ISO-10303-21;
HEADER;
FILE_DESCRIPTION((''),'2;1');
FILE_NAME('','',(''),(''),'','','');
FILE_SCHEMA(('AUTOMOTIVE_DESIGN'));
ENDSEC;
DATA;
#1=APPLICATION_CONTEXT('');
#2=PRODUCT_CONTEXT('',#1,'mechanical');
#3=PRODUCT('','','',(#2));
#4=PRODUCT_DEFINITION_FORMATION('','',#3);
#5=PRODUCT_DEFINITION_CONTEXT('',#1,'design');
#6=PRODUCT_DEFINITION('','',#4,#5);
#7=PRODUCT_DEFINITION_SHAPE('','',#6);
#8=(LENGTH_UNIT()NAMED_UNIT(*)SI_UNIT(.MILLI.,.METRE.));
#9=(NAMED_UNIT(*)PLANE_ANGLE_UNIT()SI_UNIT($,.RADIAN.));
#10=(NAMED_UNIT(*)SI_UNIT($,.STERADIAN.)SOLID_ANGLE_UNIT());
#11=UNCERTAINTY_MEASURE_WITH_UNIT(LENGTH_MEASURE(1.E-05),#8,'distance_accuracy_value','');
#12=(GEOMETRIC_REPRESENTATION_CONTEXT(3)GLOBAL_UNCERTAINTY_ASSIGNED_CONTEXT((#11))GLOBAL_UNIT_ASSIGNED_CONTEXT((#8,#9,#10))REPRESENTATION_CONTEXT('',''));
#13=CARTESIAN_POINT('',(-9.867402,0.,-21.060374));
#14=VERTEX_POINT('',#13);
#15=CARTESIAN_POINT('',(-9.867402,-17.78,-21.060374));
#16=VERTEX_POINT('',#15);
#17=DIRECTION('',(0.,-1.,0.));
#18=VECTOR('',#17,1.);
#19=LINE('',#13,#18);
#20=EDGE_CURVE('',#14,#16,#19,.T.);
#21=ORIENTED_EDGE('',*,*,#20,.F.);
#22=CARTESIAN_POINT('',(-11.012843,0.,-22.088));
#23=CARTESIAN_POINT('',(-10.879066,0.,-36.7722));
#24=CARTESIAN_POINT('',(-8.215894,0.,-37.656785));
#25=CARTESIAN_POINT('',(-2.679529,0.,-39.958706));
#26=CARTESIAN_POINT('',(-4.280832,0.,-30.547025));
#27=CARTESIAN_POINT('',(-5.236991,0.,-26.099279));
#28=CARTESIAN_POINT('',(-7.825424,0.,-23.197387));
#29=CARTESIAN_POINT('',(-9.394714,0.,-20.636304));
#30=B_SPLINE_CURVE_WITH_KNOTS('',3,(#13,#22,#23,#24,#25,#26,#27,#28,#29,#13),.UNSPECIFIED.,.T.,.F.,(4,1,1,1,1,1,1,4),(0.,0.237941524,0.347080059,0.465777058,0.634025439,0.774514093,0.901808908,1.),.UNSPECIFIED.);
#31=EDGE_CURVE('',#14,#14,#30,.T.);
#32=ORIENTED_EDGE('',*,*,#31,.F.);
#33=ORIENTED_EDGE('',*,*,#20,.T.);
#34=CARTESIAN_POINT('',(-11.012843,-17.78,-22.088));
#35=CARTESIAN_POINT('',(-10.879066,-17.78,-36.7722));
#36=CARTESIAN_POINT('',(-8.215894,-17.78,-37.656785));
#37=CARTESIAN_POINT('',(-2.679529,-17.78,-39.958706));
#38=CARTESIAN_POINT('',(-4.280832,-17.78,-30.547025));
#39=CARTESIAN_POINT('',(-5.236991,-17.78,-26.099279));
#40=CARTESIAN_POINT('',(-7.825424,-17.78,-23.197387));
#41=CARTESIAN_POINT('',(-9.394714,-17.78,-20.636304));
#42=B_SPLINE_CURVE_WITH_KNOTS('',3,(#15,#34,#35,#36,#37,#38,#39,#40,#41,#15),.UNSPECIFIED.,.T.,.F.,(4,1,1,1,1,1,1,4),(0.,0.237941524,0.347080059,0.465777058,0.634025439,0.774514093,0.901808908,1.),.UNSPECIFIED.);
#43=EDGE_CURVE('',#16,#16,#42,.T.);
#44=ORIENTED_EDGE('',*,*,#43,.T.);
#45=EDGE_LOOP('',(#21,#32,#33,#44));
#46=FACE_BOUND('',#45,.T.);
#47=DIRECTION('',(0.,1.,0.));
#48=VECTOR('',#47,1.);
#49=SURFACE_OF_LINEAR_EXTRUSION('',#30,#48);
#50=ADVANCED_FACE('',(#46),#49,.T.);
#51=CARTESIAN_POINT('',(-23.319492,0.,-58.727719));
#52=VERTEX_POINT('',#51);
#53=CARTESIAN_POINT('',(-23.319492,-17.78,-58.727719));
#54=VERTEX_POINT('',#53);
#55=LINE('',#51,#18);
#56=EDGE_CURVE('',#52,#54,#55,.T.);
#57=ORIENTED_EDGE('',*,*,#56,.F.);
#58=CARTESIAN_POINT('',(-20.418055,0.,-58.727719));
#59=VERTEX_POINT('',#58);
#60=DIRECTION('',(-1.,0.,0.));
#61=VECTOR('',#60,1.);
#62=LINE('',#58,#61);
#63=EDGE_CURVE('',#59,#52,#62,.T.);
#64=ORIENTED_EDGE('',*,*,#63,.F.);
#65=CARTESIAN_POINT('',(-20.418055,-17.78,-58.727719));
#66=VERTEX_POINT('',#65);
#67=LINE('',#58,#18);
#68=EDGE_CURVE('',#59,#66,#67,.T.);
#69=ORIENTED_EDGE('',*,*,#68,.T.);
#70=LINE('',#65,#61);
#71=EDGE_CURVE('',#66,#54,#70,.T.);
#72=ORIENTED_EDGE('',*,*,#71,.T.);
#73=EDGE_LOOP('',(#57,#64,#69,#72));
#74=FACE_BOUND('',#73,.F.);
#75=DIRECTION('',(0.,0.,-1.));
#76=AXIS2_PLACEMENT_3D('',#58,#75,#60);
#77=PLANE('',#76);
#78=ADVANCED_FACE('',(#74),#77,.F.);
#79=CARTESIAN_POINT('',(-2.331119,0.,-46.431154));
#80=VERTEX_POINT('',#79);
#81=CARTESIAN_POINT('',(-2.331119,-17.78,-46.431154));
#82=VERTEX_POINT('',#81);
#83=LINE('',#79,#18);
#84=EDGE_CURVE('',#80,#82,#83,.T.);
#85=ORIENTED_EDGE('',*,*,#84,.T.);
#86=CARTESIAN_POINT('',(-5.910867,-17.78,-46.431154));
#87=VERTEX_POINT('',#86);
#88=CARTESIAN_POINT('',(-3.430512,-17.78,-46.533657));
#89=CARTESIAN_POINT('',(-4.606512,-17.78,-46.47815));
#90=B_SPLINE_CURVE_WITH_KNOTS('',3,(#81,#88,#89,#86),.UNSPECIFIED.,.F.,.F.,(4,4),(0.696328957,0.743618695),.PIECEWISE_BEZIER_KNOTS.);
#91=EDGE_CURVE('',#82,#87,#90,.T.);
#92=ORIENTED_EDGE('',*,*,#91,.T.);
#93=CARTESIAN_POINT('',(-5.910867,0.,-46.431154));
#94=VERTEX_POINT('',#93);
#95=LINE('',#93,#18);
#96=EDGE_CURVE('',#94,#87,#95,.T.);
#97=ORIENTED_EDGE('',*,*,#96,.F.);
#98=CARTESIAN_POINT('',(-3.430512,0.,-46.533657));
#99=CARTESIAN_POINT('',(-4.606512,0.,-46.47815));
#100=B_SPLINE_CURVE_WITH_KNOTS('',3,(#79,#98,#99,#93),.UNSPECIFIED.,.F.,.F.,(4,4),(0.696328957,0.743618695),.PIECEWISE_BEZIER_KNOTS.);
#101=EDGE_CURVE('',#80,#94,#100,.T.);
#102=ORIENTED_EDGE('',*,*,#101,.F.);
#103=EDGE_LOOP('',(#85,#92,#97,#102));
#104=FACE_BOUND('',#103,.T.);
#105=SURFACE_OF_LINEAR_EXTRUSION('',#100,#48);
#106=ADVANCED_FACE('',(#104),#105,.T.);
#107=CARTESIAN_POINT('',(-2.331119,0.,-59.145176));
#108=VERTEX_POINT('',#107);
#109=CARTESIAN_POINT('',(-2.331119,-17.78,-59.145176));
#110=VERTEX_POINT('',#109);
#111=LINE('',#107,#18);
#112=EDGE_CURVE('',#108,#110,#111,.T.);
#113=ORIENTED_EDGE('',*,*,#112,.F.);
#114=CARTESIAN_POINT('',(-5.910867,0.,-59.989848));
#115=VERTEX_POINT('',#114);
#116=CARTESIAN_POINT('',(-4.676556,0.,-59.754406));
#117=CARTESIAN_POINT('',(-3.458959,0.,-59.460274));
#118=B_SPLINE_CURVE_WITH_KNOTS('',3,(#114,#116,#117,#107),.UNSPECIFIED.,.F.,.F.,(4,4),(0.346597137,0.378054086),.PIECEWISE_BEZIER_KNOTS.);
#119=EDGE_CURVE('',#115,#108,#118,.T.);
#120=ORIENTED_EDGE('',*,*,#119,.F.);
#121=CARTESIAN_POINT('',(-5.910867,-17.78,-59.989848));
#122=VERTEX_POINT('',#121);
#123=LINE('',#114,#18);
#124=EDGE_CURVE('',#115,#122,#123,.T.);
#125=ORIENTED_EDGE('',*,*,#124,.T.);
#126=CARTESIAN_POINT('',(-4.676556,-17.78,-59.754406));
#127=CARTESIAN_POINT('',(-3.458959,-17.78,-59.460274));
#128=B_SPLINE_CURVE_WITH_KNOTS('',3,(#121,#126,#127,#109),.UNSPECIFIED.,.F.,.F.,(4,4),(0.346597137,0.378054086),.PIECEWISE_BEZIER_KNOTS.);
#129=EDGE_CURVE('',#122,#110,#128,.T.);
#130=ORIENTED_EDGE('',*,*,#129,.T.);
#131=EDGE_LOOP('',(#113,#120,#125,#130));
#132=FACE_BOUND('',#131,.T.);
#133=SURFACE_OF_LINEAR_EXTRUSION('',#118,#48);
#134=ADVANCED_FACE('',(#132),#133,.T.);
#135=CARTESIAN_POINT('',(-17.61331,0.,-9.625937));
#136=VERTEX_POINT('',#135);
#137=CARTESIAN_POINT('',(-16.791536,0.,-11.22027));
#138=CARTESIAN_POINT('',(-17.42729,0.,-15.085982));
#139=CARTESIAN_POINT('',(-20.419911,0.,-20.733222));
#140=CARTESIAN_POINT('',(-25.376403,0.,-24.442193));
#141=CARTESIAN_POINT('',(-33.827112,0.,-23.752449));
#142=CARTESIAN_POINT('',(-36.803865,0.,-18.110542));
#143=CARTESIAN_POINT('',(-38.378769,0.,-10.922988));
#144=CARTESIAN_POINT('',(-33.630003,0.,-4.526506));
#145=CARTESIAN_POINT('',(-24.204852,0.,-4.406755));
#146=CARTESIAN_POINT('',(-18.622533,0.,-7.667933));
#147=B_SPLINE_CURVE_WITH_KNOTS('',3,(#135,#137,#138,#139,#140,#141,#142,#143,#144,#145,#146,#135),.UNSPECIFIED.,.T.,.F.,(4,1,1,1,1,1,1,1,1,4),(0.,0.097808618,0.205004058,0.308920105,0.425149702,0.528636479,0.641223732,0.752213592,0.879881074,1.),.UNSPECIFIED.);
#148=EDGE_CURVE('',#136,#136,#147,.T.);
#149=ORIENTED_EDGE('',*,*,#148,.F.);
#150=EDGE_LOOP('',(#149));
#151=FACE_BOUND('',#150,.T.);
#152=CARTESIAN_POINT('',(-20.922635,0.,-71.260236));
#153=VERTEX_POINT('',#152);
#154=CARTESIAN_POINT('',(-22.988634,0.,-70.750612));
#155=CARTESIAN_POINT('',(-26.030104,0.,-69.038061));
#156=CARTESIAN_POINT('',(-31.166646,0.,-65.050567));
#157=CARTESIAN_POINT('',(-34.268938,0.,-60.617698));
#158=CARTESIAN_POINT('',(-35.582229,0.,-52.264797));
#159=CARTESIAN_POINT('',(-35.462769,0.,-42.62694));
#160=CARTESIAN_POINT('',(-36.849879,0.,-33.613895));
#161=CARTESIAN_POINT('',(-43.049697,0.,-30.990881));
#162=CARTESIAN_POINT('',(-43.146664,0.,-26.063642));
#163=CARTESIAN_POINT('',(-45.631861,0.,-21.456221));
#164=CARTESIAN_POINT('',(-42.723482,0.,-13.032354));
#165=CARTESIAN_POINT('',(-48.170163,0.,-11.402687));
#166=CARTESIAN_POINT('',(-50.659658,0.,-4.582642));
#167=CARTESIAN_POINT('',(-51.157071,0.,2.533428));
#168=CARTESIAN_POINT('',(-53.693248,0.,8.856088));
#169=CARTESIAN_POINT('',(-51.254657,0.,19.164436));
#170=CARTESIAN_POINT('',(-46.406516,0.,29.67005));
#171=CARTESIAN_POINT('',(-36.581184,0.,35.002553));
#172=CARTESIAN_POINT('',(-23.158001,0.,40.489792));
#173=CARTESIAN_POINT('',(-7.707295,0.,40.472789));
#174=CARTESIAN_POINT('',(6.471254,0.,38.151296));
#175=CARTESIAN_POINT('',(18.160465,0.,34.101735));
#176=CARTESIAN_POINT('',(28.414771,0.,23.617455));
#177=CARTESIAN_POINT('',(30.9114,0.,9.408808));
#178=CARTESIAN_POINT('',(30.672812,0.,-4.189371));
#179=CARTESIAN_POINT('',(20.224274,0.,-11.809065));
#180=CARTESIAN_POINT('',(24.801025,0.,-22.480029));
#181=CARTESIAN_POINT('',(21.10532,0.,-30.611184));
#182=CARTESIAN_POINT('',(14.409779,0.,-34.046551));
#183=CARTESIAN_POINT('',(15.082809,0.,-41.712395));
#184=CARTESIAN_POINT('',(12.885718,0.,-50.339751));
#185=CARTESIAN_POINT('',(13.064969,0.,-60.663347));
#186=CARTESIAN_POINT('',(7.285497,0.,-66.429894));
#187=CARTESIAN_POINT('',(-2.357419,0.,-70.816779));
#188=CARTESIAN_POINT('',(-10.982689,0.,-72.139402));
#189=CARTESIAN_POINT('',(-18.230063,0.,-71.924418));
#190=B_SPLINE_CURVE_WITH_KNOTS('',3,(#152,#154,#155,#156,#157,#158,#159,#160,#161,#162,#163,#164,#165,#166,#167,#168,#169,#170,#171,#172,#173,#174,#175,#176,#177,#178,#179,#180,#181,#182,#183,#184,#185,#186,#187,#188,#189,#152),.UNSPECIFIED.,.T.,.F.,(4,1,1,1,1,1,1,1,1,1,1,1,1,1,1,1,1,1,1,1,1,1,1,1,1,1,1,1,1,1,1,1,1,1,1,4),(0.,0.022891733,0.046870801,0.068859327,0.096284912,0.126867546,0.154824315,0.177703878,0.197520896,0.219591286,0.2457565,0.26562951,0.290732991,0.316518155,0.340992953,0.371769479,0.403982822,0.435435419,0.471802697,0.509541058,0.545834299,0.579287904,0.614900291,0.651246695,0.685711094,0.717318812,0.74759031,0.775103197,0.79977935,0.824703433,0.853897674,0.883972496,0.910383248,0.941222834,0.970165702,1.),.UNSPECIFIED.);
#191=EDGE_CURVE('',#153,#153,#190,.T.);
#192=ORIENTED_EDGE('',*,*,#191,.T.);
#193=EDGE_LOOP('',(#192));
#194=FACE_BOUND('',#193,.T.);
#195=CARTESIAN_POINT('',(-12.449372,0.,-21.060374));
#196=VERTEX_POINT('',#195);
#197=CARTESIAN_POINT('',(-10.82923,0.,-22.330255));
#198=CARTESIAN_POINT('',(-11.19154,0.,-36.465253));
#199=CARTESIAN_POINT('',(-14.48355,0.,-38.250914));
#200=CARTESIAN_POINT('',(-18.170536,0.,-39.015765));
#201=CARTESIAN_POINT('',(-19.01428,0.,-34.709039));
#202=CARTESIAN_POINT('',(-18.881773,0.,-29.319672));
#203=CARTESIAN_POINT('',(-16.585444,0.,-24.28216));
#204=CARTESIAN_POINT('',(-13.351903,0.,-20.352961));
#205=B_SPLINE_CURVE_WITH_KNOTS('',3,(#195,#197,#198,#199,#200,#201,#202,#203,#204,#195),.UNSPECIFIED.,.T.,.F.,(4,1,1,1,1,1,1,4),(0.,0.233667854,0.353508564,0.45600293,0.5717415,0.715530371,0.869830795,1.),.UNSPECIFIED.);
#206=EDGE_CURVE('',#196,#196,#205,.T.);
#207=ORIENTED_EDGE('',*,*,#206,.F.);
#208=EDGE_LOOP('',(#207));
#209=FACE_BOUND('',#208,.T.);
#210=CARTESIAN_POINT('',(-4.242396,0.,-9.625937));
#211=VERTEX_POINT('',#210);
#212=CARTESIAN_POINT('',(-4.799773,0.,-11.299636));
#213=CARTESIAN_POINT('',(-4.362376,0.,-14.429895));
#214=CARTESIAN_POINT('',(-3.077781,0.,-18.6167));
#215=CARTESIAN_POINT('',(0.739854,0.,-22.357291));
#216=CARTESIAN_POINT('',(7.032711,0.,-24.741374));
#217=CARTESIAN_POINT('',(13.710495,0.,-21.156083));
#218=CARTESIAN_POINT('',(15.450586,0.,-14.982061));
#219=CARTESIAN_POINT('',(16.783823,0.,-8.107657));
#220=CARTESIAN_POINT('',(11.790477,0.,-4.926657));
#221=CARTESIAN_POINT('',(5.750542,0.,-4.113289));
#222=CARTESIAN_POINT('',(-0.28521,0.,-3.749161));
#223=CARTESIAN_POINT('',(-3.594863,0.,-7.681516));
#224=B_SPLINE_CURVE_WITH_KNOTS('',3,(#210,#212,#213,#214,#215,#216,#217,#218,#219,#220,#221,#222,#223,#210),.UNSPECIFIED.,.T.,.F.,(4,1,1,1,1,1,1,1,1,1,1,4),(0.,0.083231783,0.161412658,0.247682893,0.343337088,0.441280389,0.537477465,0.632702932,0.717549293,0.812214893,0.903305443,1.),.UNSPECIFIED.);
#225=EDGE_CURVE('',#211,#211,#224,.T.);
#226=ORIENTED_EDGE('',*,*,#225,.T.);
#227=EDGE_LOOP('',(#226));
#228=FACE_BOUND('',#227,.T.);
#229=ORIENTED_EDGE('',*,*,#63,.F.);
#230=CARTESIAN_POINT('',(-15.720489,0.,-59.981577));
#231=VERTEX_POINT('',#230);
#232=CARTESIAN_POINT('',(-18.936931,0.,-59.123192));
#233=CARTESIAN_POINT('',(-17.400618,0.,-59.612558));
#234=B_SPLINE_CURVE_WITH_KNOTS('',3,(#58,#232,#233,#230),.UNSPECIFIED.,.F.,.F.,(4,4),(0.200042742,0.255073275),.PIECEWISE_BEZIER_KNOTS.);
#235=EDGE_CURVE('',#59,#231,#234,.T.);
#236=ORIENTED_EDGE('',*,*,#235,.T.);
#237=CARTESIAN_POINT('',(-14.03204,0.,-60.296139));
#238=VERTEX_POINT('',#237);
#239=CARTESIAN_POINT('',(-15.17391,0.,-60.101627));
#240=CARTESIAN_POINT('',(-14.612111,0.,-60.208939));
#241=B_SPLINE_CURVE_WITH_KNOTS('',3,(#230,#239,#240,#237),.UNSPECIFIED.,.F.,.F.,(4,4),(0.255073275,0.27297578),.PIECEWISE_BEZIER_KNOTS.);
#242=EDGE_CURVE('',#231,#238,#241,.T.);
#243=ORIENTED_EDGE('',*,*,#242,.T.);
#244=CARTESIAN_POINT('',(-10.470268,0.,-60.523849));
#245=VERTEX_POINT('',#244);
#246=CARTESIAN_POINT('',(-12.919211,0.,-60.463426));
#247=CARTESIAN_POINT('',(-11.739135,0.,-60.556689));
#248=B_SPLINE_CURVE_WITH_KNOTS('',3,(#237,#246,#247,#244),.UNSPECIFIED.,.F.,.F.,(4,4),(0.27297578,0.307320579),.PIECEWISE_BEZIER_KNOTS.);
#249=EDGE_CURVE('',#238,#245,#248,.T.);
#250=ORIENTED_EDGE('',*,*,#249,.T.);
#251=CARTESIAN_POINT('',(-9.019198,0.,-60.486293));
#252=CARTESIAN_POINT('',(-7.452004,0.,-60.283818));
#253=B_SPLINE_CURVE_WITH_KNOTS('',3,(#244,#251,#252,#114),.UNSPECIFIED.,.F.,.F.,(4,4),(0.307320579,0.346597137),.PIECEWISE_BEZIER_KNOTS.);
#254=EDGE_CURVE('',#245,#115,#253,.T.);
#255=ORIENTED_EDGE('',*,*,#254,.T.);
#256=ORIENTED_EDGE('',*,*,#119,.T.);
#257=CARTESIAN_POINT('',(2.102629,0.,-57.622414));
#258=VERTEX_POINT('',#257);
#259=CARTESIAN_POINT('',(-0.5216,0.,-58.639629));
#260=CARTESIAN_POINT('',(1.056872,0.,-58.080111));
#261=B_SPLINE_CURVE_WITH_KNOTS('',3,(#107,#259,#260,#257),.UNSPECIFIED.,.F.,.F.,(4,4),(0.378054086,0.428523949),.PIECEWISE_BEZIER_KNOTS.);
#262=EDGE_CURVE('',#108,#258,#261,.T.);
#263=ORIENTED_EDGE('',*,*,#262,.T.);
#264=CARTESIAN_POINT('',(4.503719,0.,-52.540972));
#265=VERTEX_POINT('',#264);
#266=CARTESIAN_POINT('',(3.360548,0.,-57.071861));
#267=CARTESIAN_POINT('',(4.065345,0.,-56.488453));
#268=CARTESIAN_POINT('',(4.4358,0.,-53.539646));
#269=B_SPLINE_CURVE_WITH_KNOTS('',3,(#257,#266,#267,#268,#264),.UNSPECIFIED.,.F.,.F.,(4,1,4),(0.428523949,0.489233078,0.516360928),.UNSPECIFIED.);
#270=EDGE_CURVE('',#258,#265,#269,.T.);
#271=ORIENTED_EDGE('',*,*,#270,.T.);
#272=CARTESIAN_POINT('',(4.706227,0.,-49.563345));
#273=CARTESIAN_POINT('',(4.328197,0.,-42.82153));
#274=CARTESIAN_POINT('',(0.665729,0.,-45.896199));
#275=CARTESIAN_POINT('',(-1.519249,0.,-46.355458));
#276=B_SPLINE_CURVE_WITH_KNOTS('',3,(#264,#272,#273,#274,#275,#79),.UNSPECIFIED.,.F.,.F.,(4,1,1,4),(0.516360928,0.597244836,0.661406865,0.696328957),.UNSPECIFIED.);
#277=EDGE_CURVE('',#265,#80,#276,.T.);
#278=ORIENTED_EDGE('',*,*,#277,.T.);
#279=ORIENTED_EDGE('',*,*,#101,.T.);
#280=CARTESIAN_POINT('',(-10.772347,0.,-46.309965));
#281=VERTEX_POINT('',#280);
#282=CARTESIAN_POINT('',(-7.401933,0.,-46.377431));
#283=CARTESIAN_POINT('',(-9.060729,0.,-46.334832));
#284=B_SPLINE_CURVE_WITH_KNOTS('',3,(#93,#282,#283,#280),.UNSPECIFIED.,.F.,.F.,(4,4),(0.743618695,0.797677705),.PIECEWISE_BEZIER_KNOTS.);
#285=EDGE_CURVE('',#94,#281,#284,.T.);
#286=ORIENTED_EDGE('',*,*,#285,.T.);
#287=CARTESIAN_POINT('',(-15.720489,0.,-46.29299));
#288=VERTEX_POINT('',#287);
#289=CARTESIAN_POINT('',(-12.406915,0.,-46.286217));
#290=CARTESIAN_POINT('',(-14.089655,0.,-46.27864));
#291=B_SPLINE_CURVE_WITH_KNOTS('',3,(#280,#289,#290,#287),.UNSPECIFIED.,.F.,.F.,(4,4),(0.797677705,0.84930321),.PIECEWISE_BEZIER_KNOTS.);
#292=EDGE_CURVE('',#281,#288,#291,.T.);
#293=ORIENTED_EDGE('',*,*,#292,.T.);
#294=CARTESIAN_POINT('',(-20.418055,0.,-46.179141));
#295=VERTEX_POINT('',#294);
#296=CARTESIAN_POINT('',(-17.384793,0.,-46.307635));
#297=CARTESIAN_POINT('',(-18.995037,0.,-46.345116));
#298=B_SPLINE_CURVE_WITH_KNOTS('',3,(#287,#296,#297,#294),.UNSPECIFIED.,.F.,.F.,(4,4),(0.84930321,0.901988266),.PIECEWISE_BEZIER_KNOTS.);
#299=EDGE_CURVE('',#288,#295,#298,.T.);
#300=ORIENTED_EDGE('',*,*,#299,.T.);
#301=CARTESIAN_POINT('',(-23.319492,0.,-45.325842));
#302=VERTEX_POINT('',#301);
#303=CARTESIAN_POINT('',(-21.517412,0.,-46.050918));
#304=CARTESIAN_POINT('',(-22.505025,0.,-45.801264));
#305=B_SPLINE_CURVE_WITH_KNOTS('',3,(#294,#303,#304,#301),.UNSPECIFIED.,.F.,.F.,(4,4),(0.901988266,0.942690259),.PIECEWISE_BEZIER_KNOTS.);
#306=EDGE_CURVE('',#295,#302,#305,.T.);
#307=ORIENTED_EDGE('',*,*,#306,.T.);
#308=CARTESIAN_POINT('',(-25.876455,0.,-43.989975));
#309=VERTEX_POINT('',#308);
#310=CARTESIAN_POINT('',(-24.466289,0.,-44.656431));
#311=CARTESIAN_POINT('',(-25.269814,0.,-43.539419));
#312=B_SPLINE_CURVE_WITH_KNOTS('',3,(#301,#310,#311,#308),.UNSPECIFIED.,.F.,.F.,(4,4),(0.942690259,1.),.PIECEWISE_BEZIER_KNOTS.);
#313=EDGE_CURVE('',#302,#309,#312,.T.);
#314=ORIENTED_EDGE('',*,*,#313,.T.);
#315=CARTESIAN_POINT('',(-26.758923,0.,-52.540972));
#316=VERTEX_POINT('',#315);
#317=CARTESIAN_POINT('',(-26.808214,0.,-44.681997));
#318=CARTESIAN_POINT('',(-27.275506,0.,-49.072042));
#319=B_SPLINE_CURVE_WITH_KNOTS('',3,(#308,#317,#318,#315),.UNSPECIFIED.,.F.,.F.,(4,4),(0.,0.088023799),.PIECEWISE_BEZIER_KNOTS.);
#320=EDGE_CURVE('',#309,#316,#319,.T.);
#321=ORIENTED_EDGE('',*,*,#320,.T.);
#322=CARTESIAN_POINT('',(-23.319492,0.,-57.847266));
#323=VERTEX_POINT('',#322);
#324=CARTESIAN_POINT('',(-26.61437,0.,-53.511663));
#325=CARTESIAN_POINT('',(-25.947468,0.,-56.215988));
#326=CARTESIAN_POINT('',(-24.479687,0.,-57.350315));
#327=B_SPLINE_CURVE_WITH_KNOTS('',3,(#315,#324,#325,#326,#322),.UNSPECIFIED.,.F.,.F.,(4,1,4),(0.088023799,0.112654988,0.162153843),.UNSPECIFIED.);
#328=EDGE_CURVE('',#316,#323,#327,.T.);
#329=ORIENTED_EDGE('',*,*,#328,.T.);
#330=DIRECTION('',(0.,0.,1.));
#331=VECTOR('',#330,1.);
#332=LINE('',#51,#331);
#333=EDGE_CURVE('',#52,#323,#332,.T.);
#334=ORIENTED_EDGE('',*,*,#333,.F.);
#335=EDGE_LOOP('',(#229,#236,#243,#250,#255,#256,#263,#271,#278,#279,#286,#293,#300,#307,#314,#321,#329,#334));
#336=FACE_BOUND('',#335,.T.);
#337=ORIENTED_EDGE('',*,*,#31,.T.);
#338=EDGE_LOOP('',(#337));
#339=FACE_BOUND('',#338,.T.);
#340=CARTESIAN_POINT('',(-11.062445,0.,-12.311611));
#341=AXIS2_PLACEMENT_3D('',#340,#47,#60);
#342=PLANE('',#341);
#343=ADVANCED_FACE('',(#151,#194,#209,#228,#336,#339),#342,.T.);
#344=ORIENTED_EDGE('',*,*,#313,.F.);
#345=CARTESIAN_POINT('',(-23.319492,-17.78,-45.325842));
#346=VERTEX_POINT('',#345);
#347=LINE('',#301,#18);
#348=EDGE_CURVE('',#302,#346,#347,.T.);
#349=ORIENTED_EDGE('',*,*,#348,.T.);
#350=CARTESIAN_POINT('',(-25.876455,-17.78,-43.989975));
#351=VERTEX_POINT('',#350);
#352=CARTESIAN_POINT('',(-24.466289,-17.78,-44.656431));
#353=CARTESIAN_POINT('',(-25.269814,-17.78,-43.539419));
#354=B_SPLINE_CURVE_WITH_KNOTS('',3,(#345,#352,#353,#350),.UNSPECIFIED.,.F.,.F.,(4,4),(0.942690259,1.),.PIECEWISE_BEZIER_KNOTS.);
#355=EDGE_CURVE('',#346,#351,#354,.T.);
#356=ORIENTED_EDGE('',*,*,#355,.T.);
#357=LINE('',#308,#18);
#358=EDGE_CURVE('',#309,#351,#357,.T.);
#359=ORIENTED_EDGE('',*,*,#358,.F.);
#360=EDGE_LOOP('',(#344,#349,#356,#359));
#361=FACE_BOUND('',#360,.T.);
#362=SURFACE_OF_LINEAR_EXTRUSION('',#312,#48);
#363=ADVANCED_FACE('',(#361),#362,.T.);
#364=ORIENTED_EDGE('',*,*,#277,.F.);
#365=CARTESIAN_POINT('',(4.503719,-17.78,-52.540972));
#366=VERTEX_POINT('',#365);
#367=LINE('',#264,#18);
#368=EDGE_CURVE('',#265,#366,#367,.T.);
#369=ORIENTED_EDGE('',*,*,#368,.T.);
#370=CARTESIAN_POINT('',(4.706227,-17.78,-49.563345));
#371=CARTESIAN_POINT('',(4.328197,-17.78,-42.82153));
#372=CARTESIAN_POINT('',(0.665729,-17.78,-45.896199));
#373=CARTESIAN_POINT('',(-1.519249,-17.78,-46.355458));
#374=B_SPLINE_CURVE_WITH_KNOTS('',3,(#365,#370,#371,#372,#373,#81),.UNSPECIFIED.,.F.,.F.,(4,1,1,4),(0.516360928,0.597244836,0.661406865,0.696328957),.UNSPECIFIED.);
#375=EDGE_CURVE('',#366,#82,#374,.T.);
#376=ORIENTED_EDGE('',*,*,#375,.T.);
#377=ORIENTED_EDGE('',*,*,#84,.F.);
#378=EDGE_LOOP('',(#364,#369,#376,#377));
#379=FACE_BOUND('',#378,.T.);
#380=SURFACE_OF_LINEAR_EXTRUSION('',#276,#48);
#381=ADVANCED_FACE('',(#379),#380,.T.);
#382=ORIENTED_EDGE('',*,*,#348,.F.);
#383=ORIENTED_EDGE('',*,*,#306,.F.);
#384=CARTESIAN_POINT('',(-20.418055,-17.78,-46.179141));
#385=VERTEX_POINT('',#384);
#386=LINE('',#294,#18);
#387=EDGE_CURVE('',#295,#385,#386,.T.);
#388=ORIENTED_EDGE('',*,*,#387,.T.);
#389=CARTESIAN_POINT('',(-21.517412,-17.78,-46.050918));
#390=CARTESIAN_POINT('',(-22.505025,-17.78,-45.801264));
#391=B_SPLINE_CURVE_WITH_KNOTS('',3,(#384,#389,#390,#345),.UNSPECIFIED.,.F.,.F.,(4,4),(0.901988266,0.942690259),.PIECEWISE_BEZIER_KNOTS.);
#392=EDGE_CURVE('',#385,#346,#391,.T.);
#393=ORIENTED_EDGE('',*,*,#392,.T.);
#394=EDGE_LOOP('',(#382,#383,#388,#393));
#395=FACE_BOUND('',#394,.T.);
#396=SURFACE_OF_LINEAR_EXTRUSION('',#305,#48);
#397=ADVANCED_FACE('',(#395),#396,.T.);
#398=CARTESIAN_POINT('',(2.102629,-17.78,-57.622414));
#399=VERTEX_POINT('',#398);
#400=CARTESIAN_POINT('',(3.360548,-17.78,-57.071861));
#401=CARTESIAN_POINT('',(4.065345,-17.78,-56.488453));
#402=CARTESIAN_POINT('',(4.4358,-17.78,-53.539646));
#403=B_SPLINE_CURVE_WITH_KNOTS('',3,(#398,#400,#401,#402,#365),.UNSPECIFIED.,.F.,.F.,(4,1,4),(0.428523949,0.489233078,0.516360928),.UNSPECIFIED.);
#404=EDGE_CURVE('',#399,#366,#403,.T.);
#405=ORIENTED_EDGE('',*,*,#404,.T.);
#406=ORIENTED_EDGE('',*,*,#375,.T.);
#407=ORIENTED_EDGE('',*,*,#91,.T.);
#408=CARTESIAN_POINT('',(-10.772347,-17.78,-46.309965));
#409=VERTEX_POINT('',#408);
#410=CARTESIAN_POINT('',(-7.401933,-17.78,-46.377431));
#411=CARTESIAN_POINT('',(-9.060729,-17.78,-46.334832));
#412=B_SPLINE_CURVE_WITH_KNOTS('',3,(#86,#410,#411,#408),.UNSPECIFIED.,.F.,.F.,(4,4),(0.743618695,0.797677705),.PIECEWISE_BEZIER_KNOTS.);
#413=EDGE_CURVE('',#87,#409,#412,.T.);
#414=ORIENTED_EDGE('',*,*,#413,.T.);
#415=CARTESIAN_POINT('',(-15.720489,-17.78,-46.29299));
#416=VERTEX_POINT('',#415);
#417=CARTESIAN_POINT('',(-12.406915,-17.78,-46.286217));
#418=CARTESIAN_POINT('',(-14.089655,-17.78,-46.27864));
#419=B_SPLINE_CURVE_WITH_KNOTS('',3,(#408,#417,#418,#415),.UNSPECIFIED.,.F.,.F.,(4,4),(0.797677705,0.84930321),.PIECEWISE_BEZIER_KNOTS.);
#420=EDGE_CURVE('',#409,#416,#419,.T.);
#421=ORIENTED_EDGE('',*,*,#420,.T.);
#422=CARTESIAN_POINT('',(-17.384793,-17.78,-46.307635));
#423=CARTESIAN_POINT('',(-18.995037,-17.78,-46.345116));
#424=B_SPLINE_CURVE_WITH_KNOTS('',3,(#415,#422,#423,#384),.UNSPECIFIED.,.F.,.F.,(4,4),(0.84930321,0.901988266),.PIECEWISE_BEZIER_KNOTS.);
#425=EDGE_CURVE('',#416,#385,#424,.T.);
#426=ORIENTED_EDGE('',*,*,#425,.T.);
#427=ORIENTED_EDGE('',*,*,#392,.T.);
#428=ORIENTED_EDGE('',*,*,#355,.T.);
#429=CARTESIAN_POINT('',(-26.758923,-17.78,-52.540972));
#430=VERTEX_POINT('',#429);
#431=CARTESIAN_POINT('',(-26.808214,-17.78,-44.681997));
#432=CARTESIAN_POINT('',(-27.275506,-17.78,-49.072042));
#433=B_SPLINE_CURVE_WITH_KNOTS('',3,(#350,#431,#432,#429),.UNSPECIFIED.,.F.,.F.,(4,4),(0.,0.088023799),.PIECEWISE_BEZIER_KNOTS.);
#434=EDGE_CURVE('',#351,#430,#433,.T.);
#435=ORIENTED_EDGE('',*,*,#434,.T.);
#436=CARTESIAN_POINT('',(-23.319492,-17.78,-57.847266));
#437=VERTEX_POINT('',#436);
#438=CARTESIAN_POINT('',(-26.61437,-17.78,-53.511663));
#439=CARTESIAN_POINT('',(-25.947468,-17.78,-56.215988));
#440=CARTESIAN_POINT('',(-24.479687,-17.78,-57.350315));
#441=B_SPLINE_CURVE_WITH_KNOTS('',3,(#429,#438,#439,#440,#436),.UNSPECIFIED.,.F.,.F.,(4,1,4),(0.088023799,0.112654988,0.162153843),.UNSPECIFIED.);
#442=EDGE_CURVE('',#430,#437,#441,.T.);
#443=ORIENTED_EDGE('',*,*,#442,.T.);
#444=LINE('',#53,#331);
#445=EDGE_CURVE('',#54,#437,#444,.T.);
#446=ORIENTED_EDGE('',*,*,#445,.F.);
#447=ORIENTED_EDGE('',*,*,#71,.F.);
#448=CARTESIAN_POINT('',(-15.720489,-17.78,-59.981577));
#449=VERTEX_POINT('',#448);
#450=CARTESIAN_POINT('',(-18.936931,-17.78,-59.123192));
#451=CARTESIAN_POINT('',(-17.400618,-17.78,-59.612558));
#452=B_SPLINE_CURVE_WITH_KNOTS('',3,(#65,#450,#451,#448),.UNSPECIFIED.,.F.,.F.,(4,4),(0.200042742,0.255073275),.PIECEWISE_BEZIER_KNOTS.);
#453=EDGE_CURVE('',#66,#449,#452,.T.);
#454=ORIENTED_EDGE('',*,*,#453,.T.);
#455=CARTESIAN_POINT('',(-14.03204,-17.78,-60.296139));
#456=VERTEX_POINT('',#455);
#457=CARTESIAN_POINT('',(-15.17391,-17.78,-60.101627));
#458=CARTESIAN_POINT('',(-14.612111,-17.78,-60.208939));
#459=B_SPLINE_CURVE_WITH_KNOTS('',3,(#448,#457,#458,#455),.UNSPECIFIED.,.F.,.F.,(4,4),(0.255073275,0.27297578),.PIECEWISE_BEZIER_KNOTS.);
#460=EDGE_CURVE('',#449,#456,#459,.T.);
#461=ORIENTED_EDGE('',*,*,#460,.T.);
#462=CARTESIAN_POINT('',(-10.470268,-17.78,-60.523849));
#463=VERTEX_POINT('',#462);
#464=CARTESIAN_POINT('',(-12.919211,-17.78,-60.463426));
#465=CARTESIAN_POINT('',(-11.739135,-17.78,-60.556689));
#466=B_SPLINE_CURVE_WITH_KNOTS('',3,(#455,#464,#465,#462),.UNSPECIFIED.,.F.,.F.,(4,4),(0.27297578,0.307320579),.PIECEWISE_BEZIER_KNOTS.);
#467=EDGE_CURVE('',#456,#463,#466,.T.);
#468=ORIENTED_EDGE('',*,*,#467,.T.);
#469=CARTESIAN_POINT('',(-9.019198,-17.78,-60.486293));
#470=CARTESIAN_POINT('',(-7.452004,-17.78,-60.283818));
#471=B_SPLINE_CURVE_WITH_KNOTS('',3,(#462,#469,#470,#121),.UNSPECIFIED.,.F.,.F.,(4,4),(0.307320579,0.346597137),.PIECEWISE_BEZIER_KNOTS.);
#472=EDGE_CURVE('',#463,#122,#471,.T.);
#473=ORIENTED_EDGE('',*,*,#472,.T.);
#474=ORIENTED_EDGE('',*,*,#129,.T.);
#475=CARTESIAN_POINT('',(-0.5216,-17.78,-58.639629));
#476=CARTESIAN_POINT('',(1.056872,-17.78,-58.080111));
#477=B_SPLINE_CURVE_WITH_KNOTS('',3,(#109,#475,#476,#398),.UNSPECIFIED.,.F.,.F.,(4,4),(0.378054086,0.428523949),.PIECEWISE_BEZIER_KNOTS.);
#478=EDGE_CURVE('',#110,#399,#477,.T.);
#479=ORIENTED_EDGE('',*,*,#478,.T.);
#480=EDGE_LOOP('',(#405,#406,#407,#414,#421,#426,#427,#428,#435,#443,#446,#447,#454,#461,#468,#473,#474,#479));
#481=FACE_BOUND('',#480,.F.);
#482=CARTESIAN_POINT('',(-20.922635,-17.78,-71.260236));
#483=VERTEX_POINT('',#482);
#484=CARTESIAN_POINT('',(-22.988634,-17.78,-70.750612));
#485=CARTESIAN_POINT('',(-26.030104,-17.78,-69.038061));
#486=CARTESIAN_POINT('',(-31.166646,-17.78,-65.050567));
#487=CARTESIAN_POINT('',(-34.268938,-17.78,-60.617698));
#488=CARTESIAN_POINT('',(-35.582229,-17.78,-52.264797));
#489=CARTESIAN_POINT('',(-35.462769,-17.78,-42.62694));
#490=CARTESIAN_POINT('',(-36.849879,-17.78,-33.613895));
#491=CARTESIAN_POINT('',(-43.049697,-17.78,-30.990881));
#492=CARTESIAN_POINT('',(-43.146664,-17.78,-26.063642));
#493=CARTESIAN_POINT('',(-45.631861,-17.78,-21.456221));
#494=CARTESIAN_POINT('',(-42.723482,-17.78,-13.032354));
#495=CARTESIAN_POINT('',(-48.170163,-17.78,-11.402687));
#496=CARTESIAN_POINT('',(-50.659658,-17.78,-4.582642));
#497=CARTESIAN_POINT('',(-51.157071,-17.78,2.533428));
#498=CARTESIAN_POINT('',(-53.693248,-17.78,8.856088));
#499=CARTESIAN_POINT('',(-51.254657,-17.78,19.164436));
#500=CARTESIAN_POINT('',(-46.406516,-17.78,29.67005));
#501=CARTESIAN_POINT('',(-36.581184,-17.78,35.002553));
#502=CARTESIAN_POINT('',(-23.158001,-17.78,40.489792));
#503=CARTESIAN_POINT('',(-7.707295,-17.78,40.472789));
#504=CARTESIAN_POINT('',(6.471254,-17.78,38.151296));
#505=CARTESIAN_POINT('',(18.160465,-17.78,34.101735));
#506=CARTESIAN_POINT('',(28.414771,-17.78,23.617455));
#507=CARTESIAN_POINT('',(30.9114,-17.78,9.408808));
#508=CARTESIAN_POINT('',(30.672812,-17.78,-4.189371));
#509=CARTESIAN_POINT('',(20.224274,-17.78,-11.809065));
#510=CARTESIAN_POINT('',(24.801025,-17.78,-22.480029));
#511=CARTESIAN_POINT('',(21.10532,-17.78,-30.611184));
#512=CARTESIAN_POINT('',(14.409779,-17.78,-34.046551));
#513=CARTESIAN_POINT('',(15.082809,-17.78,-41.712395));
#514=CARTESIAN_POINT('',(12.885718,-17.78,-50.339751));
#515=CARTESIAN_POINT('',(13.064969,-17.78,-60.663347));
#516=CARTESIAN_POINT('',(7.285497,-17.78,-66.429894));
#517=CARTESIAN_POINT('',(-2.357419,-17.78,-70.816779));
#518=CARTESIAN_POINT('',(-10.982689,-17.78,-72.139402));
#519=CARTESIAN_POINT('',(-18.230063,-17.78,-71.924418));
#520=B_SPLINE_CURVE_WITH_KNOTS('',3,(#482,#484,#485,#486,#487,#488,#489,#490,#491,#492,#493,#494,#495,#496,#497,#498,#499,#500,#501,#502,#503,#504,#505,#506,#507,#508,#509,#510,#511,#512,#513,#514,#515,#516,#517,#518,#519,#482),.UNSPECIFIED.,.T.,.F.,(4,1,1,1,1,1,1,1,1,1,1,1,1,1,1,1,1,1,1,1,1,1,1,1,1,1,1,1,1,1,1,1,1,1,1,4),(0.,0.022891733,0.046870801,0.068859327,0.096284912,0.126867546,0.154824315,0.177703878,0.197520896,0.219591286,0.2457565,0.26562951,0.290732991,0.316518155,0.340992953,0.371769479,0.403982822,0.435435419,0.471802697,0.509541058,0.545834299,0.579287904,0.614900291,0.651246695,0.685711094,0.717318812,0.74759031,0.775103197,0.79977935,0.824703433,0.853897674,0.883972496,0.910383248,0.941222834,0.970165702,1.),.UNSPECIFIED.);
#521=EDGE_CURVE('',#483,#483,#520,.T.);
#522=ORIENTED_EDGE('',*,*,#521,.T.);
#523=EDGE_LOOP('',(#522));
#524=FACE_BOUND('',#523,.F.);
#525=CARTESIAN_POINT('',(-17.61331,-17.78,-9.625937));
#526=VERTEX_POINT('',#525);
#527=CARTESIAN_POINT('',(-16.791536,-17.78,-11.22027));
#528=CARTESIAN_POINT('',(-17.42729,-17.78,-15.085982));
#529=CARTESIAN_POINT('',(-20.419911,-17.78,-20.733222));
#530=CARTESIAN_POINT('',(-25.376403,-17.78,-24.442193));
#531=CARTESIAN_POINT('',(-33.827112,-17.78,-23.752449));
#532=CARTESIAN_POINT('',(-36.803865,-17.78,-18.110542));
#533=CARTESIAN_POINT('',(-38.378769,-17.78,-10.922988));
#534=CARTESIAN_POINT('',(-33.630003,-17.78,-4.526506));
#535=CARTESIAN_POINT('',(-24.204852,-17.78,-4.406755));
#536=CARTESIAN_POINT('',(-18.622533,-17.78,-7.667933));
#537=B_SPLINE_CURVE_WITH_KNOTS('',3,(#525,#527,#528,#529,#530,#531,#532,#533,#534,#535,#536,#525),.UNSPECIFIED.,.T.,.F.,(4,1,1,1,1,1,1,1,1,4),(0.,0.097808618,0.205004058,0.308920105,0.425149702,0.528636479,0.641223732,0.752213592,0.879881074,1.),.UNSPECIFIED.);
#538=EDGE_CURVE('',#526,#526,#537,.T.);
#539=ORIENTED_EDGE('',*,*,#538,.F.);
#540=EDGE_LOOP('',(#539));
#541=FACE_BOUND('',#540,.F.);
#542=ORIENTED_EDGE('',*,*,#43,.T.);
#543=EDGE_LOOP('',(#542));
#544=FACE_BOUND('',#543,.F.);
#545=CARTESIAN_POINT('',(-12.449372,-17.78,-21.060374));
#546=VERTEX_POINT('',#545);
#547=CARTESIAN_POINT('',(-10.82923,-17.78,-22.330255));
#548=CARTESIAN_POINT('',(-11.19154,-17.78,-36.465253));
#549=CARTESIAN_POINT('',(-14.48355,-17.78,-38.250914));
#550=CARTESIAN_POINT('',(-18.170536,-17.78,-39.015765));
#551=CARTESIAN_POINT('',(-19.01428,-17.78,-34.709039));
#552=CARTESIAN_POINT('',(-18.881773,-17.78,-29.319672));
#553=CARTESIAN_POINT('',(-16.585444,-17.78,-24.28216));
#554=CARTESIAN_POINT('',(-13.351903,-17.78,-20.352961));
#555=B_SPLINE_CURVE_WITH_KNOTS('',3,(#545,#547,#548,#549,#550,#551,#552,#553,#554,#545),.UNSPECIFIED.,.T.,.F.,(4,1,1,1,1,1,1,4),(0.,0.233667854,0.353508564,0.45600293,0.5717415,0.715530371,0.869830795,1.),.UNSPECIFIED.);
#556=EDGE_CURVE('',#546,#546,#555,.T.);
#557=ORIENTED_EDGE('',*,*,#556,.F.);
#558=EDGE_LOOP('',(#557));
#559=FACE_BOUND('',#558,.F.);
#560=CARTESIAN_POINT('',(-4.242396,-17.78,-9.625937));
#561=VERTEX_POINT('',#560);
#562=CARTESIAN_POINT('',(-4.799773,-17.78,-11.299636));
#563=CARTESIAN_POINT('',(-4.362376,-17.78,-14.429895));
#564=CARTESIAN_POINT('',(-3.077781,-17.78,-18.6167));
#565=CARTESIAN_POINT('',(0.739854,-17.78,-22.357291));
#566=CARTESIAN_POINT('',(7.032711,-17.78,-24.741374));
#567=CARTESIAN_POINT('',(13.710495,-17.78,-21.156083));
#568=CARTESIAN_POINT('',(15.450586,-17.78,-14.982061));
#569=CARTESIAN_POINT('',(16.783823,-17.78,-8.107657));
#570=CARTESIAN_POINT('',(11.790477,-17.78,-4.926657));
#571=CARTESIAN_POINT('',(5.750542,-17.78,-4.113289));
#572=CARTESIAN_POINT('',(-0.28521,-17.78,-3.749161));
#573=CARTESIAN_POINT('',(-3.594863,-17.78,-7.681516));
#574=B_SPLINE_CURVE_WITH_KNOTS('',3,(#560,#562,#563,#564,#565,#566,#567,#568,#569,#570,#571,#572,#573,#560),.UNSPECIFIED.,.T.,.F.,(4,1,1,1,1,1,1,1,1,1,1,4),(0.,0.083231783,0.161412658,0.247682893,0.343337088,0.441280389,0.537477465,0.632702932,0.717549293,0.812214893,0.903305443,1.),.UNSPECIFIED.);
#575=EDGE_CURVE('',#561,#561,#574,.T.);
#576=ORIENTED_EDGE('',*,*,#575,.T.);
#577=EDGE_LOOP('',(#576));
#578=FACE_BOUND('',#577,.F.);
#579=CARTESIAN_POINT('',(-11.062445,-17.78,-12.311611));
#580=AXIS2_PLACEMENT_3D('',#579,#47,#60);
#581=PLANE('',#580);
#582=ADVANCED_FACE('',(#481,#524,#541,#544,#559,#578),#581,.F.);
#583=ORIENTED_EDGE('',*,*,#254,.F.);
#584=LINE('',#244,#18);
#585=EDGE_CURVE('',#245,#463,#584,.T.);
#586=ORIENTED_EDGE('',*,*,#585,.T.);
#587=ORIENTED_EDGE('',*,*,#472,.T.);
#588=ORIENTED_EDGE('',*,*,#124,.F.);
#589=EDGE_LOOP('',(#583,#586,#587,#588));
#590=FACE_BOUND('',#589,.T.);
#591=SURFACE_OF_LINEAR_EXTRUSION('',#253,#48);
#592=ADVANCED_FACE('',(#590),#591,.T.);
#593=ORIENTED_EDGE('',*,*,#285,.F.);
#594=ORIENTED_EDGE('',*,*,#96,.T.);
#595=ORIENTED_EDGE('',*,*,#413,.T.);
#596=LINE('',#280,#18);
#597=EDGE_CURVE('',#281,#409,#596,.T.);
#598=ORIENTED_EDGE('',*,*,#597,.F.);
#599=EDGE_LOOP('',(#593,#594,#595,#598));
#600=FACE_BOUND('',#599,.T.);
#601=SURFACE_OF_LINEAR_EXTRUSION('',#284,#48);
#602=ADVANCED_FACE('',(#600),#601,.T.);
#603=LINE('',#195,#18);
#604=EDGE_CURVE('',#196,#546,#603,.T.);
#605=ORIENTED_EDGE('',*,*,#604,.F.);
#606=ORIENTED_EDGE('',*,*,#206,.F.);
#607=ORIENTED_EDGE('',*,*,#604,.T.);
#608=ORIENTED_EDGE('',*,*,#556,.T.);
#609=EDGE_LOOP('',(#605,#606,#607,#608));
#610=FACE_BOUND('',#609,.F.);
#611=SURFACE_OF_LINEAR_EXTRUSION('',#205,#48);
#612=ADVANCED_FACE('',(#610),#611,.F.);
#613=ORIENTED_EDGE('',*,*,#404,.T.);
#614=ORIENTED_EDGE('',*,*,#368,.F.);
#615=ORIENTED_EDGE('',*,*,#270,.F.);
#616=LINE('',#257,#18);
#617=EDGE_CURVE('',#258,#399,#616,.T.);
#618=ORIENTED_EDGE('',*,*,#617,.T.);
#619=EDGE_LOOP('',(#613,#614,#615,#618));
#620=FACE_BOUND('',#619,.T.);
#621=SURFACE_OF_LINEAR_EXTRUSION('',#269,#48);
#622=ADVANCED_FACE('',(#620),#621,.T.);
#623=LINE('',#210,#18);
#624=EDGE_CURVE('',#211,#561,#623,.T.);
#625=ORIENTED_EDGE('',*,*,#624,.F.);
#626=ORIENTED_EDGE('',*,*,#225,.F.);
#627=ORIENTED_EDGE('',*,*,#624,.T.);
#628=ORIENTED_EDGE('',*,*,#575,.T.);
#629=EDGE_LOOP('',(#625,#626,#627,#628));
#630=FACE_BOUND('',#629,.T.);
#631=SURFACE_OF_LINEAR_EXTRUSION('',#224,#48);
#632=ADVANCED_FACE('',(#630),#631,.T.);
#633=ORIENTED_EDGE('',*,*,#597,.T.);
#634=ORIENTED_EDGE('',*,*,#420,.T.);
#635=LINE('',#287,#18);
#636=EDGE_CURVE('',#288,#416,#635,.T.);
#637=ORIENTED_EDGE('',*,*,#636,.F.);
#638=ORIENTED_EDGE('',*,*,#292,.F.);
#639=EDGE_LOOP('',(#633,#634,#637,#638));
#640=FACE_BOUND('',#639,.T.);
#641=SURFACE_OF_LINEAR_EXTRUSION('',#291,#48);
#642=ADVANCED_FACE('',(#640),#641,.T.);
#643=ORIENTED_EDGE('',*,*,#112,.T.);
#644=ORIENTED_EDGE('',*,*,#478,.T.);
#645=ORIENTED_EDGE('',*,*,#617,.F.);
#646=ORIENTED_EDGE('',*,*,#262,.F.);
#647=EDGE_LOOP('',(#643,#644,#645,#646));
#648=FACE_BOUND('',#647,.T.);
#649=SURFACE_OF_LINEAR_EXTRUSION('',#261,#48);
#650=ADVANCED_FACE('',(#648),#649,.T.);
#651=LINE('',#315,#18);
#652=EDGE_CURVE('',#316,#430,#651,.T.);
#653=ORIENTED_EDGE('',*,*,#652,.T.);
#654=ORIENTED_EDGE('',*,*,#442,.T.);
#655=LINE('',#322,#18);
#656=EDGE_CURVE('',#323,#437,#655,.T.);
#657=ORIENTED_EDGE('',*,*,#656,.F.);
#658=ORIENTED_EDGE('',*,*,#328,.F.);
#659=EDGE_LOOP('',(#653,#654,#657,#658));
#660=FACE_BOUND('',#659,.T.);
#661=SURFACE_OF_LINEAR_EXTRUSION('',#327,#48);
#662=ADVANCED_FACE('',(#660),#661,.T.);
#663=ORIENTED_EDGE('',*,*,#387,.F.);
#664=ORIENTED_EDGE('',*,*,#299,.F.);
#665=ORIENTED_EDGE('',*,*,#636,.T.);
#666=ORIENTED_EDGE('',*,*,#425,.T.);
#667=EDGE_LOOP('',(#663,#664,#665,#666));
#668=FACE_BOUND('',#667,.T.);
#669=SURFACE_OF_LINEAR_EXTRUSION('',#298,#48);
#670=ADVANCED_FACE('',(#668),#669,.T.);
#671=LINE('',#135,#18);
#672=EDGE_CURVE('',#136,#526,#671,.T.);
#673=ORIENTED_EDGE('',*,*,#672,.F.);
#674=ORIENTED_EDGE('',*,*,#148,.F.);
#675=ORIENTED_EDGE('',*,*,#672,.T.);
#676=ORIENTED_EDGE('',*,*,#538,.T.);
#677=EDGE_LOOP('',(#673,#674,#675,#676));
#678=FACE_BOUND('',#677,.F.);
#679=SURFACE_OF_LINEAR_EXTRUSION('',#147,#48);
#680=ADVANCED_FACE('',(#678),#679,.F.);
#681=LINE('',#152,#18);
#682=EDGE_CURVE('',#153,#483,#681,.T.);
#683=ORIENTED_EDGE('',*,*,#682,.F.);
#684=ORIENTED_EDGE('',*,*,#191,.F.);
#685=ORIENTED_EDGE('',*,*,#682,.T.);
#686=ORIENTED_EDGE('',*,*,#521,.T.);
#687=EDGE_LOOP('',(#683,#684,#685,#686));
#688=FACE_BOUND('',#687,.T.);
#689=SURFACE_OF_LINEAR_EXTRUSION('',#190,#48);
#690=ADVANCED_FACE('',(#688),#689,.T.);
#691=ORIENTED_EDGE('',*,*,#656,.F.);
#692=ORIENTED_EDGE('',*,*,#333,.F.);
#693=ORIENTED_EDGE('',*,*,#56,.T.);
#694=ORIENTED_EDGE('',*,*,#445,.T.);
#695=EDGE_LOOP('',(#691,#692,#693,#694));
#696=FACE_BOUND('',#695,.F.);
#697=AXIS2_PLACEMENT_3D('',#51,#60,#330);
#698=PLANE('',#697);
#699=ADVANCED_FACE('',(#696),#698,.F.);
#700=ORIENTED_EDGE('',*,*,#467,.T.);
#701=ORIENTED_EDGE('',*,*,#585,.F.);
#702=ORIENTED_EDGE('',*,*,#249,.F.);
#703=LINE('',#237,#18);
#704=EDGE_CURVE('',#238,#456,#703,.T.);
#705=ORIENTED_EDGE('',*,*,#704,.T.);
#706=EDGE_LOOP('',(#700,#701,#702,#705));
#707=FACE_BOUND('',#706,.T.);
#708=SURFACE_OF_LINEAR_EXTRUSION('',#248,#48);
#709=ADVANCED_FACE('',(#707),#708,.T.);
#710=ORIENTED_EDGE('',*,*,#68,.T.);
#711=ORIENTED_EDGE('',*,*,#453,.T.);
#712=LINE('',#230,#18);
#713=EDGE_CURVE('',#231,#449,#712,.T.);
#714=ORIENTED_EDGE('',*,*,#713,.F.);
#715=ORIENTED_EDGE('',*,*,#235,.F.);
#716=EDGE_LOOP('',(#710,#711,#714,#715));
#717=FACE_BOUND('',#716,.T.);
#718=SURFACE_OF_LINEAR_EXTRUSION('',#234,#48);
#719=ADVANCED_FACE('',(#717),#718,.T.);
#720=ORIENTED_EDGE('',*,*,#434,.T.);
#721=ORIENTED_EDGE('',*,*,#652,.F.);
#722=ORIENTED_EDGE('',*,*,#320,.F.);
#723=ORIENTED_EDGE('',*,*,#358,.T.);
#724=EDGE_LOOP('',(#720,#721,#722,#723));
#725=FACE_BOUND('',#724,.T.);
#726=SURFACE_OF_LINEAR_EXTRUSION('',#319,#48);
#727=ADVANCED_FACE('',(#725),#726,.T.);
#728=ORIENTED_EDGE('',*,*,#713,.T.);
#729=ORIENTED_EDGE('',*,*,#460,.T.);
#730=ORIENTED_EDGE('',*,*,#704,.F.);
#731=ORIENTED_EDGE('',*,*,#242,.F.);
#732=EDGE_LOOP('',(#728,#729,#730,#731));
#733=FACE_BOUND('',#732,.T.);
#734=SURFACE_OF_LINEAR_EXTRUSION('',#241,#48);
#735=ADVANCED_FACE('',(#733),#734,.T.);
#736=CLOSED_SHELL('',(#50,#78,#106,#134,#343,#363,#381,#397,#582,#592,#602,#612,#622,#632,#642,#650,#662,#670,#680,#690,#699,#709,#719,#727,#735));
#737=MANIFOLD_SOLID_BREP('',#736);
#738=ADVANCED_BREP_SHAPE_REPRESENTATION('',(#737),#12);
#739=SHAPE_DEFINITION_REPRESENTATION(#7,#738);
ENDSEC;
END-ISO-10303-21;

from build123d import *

# Parameters (mm, degrees)
F1_DEPTH = 17.78


# Not quite as in the source:
# - the program builds the solid bodies; features that only make, move or delete a surface that nothing else refers to are left out


with BuildPart() as f1:
    # F0 (on Front) → F1 (new body)
    with BuildSketch(Plane.XZ):
        with BuildLine():
            add(Edge.make_bspline(
                [(-20.9226347506, -71.2602362037), (-22.9886342213, -70.7506123091), (-26.0301044902, -69.0380612745), (-31.1666456634, -65.0505667557), (-34.2689378028, -60.6176976927), (-35.5822291113, -52.2647973285), (-35.4627694042, -42.6269395546), (-36.8498794394, -33.613895217), (-43.0496971354, -30.9908814125), (-43.1466641232, -26.0636418667), (-45.6318612712, -21.4562205965), (-42.723481771, -13.0323540897), (-48.1701631476, -11.4026865835), (-50.6596581538, -4.5826420913), (-51.1570706347, 2.5334279955), (-53.6932475631, 8.8560882656), (-51.2546569538, 19.164436079), (-46.4065160275, 29.6700504939), (-36.5811839124, 35.0025530943), (-23.1580005213, 40.489791694), (-7.7072946703, 40.4727885367), (6.4712539836, 38.1512957348), (18.1604650619, 34.1017346949), (28.4147710656, 23.6174553255), (30.911400155, 9.4088083889), (30.6728119611, -4.1893708351), (20.2242742309, -11.8090645901), (24.8010252062, -22.4800291026), (21.1053201708, -30.6111839492), (14.4097792293, -34.0465505235), (15.0828088795, -41.7123951546), (12.8857178127, -50.3397512226), (13.0649687999, -60.6633470175), (7.2854967108, -66.4298943527), (-2.3574186317, -70.8167790943), (-10.982688846, -72.1394021849), (-18.2300625399, -71.92441795), (-20.9226347506, -71.2602362037)],
                knots=[0, 0, 0, 0, 0.0228917331, 0.0468708008, 0.0688593266, 0.0962849122, 0.1268675457, 0.1548243145, 0.1777038778, 0.1975208964, 0.2195912859, 0.2457564995, 0.2656295096, 0.290732991, 0.3165181546, 0.3409929532, 0.3717694787, 0.403982822, 0.4354354186, 0.4718026973, 0.5095410579, 0.5458342986, 0.5792879041, 0.614900291, 0.6512466949, 0.685711094, 0.7173188118, 0.7475903097, 0.7751031966, 0.7997793498, 0.8247034334, 0.8538976743, 0.883972496, 0.9103832483, 0.9412228343, 0.9701657017, 1, 1, 1, 1], degree=3))
        make_face()
        with BuildLine():
            add(Edge.make_bspline(
                [(-12.4493716285, -21.0603736341), (-10.829230374, -22.3302554562), (-11.1915395304, -36.4652533596), (-14.4835500635, -38.2509141163), (-18.1705359121, -39.0157648002), (-19.0142803498, -34.7090389314), (-18.8817734758, -29.3196721187), (-16.5854441236, -24.2821601952), (-13.3519027008, -20.3529613641), (-12.4493716285, -21.0603736341)],
                knots=[0, 0, 0, 0, 0.2336678543, 0.3535085639, 0.4560029301, 0.5717415004, 0.7155303715, 0.869830795, 1, 1, 1, 1], degree=3))
        make_face(mode=Mode.SUBTRACT)
        with BuildLine():
            add(Edge.make_bspline(
                [(-25.876455009, -43.9899750054), (-26.8082138316, -44.681997323), (-27.2755063744, -49.0720417723), (-26.7589227771, -52.5409724782)],
                knots=[0, 0, 0, 0, 0.0880237985, 0.0880237985, 0.0880237985, 0.0880237985], degree=3))
            add(Edge.make_bspline(
                [(-23.3194921166, -45.3258417547), (-24.4662885556, -44.6564309517), (-25.2698138816, -43.5394193587), (-25.876455009, -43.9899750054)],
                knots=[0.9426902595, 0.9426902595, 0.9426902595, 0.9426902595, 1, 1, 1, 1], degree=3))
            add(Edge.make_bspline(
                [(-20.4180553555, -46.1791414835), (-21.5174121124, -46.0509177156), (-22.5050249683, -45.8012644968), (-23.3194921166, -45.3258417547)],
                knots=[0.9019882662, 0.9019882662, 0.9019882662, 0.9019882662, 0.9426902595, 0.9426902595, 0.9426902595, 0.9426902595], degree=3))
            add(Edge.make_bspline(
                [(-15.7204885036, -46.2929904461), (-17.3847926735, -46.3076350432), (-18.9950372744, -46.345115576), (-20.4180553555, -46.1791414835)],
                knots=[0.8493032102, 0.8493032102, 0.8493032102, 0.8493032102, 0.9019882662, 0.9019882662, 0.9019882662, 0.9019882662], degree=3))
            add(Edge.make_bspline(
                [(-10.7723470241, -46.309964849), (-12.4069148876, -46.286216951), (-14.0896552183, -46.278640367), (-15.7204885036, -46.2929904461)],
                knots=[0.7976777053, 0.7976777053, 0.7976777053, 0.7976777053, 0.8493032102, 0.8493032102, 0.8493032102, 0.8493032102], degree=3))
            add(Edge.make_bspline(
                [(-5.9108668938, -46.4311540127), (-7.4019328535, -46.3774312878), (-9.060729449, -46.3348321674), (-10.7723470241, -46.309964849)],
                knots=[0.7436186947, 0.7436186947, 0.7436186947, 0.7436186947, 0.7976777053, 0.7976777053, 0.7976777053, 0.7976777053], degree=3))
            add(Edge.make_bspline(
                [(-2.3311186086, -46.4311540127), (-3.4305119234, -46.5336573619), (-4.6065123191, -46.4781495742), (-5.9108668938, -46.4311540127)],
                knots=[0.6963289573, 0.6963289573, 0.6963289573, 0.6963289573, 0.7436186947, 0.7436186947, 0.7436186947, 0.7436186947], degree=3))
            add(Edge.make_bspline(
                [(4.5037194588, -52.5409724782), (4.7062271291, -49.5633453673), (4.3281969185, -42.8215296425), (0.6657290389, -45.8961991189), (-1.5192487102, -46.3554582788), (-2.3311186086, -46.4311540127)],
                knots=[0.5163609284, 0.5163609284, 0.5163609284, 0.5163609284, 0.5972448361, 0.6614068654, 0.6963289573, 0.6963289573, 0.6963289573, 0.6963289573], degree=3))
            add(Edge.make_bspline(
                [(2.1026290487, -57.6224140823), (3.3605482708, -57.0718606927), (4.0653451976, -56.4884533312), (4.4357999194, -53.5396460666), (4.5037194588, -52.5409724782)],
                knots=[0.4285239488, 0.4285239488, 0.4285239488, 0.4285239488, 0.4892330782, 0.5163609284, 0.5163609284, 0.5163609284, 0.5163609284], degree=3))
            add(Edge.make_bspline(
                [(-2.3311186086, -59.1451756831), (-0.5215999354, -58.639628573), (1.0568718328, -58.0801105463), (2.1026290487, -57.6224140823)],
                knots=[0.3780540863, 0.3780540863, 0.3780540863, 0.3780540863, 0.4285239488, 0.4285239488, 0.4285239488, 0.4285239488], degree=3))
            add(Edge.make_bspline(
                [(-5.9108668938, -59.9898483283), (-4.6765560372, -59.7544057168), (-3.4589587425, -59.4602740177), (-2.3311186086, -59.1451756831)],
                knots=[0.3465971374, 0.3465971374, 0.3465971374, 0.3465971374, 0.3780540863, 0.3780540863, 0.3780540863, 0.3780540863], degree=3))
            add(Edge.make_bspline(
                [(-10.4702683166, -60.5238489807), (-9.0191975358, -60.4862931551), (-7.4520043668, -60.2838175739), (-5.9108668938, -59.9898483283)],
                knots=[0.3073205788, 0.3073205788, 0.3073205788, 0.3073205788, 0.3465971374, 0.3465971374, 0.3465971374, 0.3465971374], degree=3))
            add(Edge.make_bspline(
                [(-14.0320396464, -60.2961386998), (-12.9192111237, -60.4634255551), (-11.7391354352, -60.55668911), (-10.4702683166, -60.5238489807)],
                knots=[0.2729757802, 0.2729757802, 0.2729757802, 0.2729757802, 0.3073205788, 0.3073205788, 0.3073205788, 0.3073205788], degree=3))
            add(Edge.make_bspline(
                [(-15.7204885036, -59.9815773863), (-15.1739097224, -60.1016265638), (-14.612110549, -60.2089390683), (-14.0320396464, -60.2961386998)],
                knots=[0.255073275, 0.255073275, 0.255073275, 0.255073275, 0.2729757802, 0.2729757802, 0.2729757802, 0.2729757802], degree=3))
            add(Edge.make_bspline(
                [(-20.4180553555, -58.7277188897), (-18.9369313978, -59.1231916021), (-17.4006176954, -59.6125580708), (-15.7204885036, -59.9815773863)],
                knots=[0.2000427423, 0.2000427423, 0.2000427423, 0.2000427423, 0.255073275, 0.255073275, 0.255073275, 0.255073275], degree=3))
            Line((-20.4180553555, -58.7277188897), (-23.3194921166, -58.7277188897))
            Line((-23.3194921166, -58.7277188897), (-23.3194921166, -57.8472660991))
            add(Edge.make_bspline(
                [(-26.7589227771, -52.5409724782), (-26.6143701808, -53.5116632674), (-25.9474677782, -56.2159884416), (-24.4796867279, -57.3503153053), (-23.3194921166, -57.8472660991)],
                knots=[0.0880237985, 0.0880237985, 0.0880237985, 0.0880237985, 0.1126549882, 0.162153843, 0.162153843, 0.162153843, 0.162153843], degree=3))
        make_face(mode=Mode.SUBTRACT)
        with BuildLine():
            add(Edge.make_bspline(
                [(-9.8674017936, -21.0603736341), (-11.0128428563, -22.0880001403), (-10.8790656481, -36.7722003639), (-8.2158939088, -37.6567846761), (-2.6795293613, -39.9587056149), (-4.2808324195, -30.5470254811), (-5.2369907779, -26.0992788001), (-7.8254242786, -23.1973871392), (-9.3947137725, -20.6363040286), (-9.8674017936, -21.0603736341)],
                knots=[0, 0, 0, 0, 0.2379415243, 0.3470800591, 0.465777058, 0.6340254385, 0.7745140926, 0.9018089085, 1, 1, 1, 1], degree=3))
        make_face(mode=Mode.SUBTRACT)
        with BuildLine():
            add(Edge.make_bspline(
                [(-17.6133103669, -9.6259368584), (-16.7915361215, -11.2202701541), (-17.4272897806, -15.0859816115), (-20.4199107518, -20.7332219768), (-25.3764034964, -24.4421930464), (-33.8271124958, -23.752448571), (-36.8038646033, -18.1105419651), (-38.3787688337, -10.9229876004), (-33.630003342, -4.526506425), (-24.2048522234, -4.4067552806), (-18.6225326828, -7.6679334892), (-17.6133103669, -9.6259368584)],
                knots=[0, 0, 0, 0, 0.0978086176, 0.2050040575, 0.3089201047, 0.4251497023, 0.5286364792, 0.641223732, 0.7522135924, 0.8798810743, 1, 1, 1, 1], degree=3))
        make_face(mode=Mode.SUBTRACT)
        with BuildLine():
            add(Edge.make_bspline(
                [(-4.2423959821, -9.6259368584), (-4.7997731181, -11.2996363883), (-4.3623758823, -14.4298950921), (-3.0777807037, -18.6166996651), (0.7398538249, -22.3572914891), (7.0327110981, -24.7413735393), (13.7104948343, -21.1560833864), (15.4505862881, -14.9820605467), (16.7838233922, -8.1076566408), (11.790477128, -4.9266573903), (5.750541843, -4.1132888004), (-0.2852097044, -3.7491609516), (-3.5948628732, -7.681515765), (-4.2423959821, -9.6259368584)],
                knots=[0, 0, 0, 0, 0.0832317834, 0.1614126581, 0.2476828932, 0.3433370881, 0.4412803885, 0.5374774647, 0.6327029315, 0.717549293, 0.8122148935, 0.9033054426, 1, 1, 1, 1], degree=3))
        make_face(mode=Mode.SUBTRACT)
    extrude(amount=F1_DEPTH)


solid = f1.part
